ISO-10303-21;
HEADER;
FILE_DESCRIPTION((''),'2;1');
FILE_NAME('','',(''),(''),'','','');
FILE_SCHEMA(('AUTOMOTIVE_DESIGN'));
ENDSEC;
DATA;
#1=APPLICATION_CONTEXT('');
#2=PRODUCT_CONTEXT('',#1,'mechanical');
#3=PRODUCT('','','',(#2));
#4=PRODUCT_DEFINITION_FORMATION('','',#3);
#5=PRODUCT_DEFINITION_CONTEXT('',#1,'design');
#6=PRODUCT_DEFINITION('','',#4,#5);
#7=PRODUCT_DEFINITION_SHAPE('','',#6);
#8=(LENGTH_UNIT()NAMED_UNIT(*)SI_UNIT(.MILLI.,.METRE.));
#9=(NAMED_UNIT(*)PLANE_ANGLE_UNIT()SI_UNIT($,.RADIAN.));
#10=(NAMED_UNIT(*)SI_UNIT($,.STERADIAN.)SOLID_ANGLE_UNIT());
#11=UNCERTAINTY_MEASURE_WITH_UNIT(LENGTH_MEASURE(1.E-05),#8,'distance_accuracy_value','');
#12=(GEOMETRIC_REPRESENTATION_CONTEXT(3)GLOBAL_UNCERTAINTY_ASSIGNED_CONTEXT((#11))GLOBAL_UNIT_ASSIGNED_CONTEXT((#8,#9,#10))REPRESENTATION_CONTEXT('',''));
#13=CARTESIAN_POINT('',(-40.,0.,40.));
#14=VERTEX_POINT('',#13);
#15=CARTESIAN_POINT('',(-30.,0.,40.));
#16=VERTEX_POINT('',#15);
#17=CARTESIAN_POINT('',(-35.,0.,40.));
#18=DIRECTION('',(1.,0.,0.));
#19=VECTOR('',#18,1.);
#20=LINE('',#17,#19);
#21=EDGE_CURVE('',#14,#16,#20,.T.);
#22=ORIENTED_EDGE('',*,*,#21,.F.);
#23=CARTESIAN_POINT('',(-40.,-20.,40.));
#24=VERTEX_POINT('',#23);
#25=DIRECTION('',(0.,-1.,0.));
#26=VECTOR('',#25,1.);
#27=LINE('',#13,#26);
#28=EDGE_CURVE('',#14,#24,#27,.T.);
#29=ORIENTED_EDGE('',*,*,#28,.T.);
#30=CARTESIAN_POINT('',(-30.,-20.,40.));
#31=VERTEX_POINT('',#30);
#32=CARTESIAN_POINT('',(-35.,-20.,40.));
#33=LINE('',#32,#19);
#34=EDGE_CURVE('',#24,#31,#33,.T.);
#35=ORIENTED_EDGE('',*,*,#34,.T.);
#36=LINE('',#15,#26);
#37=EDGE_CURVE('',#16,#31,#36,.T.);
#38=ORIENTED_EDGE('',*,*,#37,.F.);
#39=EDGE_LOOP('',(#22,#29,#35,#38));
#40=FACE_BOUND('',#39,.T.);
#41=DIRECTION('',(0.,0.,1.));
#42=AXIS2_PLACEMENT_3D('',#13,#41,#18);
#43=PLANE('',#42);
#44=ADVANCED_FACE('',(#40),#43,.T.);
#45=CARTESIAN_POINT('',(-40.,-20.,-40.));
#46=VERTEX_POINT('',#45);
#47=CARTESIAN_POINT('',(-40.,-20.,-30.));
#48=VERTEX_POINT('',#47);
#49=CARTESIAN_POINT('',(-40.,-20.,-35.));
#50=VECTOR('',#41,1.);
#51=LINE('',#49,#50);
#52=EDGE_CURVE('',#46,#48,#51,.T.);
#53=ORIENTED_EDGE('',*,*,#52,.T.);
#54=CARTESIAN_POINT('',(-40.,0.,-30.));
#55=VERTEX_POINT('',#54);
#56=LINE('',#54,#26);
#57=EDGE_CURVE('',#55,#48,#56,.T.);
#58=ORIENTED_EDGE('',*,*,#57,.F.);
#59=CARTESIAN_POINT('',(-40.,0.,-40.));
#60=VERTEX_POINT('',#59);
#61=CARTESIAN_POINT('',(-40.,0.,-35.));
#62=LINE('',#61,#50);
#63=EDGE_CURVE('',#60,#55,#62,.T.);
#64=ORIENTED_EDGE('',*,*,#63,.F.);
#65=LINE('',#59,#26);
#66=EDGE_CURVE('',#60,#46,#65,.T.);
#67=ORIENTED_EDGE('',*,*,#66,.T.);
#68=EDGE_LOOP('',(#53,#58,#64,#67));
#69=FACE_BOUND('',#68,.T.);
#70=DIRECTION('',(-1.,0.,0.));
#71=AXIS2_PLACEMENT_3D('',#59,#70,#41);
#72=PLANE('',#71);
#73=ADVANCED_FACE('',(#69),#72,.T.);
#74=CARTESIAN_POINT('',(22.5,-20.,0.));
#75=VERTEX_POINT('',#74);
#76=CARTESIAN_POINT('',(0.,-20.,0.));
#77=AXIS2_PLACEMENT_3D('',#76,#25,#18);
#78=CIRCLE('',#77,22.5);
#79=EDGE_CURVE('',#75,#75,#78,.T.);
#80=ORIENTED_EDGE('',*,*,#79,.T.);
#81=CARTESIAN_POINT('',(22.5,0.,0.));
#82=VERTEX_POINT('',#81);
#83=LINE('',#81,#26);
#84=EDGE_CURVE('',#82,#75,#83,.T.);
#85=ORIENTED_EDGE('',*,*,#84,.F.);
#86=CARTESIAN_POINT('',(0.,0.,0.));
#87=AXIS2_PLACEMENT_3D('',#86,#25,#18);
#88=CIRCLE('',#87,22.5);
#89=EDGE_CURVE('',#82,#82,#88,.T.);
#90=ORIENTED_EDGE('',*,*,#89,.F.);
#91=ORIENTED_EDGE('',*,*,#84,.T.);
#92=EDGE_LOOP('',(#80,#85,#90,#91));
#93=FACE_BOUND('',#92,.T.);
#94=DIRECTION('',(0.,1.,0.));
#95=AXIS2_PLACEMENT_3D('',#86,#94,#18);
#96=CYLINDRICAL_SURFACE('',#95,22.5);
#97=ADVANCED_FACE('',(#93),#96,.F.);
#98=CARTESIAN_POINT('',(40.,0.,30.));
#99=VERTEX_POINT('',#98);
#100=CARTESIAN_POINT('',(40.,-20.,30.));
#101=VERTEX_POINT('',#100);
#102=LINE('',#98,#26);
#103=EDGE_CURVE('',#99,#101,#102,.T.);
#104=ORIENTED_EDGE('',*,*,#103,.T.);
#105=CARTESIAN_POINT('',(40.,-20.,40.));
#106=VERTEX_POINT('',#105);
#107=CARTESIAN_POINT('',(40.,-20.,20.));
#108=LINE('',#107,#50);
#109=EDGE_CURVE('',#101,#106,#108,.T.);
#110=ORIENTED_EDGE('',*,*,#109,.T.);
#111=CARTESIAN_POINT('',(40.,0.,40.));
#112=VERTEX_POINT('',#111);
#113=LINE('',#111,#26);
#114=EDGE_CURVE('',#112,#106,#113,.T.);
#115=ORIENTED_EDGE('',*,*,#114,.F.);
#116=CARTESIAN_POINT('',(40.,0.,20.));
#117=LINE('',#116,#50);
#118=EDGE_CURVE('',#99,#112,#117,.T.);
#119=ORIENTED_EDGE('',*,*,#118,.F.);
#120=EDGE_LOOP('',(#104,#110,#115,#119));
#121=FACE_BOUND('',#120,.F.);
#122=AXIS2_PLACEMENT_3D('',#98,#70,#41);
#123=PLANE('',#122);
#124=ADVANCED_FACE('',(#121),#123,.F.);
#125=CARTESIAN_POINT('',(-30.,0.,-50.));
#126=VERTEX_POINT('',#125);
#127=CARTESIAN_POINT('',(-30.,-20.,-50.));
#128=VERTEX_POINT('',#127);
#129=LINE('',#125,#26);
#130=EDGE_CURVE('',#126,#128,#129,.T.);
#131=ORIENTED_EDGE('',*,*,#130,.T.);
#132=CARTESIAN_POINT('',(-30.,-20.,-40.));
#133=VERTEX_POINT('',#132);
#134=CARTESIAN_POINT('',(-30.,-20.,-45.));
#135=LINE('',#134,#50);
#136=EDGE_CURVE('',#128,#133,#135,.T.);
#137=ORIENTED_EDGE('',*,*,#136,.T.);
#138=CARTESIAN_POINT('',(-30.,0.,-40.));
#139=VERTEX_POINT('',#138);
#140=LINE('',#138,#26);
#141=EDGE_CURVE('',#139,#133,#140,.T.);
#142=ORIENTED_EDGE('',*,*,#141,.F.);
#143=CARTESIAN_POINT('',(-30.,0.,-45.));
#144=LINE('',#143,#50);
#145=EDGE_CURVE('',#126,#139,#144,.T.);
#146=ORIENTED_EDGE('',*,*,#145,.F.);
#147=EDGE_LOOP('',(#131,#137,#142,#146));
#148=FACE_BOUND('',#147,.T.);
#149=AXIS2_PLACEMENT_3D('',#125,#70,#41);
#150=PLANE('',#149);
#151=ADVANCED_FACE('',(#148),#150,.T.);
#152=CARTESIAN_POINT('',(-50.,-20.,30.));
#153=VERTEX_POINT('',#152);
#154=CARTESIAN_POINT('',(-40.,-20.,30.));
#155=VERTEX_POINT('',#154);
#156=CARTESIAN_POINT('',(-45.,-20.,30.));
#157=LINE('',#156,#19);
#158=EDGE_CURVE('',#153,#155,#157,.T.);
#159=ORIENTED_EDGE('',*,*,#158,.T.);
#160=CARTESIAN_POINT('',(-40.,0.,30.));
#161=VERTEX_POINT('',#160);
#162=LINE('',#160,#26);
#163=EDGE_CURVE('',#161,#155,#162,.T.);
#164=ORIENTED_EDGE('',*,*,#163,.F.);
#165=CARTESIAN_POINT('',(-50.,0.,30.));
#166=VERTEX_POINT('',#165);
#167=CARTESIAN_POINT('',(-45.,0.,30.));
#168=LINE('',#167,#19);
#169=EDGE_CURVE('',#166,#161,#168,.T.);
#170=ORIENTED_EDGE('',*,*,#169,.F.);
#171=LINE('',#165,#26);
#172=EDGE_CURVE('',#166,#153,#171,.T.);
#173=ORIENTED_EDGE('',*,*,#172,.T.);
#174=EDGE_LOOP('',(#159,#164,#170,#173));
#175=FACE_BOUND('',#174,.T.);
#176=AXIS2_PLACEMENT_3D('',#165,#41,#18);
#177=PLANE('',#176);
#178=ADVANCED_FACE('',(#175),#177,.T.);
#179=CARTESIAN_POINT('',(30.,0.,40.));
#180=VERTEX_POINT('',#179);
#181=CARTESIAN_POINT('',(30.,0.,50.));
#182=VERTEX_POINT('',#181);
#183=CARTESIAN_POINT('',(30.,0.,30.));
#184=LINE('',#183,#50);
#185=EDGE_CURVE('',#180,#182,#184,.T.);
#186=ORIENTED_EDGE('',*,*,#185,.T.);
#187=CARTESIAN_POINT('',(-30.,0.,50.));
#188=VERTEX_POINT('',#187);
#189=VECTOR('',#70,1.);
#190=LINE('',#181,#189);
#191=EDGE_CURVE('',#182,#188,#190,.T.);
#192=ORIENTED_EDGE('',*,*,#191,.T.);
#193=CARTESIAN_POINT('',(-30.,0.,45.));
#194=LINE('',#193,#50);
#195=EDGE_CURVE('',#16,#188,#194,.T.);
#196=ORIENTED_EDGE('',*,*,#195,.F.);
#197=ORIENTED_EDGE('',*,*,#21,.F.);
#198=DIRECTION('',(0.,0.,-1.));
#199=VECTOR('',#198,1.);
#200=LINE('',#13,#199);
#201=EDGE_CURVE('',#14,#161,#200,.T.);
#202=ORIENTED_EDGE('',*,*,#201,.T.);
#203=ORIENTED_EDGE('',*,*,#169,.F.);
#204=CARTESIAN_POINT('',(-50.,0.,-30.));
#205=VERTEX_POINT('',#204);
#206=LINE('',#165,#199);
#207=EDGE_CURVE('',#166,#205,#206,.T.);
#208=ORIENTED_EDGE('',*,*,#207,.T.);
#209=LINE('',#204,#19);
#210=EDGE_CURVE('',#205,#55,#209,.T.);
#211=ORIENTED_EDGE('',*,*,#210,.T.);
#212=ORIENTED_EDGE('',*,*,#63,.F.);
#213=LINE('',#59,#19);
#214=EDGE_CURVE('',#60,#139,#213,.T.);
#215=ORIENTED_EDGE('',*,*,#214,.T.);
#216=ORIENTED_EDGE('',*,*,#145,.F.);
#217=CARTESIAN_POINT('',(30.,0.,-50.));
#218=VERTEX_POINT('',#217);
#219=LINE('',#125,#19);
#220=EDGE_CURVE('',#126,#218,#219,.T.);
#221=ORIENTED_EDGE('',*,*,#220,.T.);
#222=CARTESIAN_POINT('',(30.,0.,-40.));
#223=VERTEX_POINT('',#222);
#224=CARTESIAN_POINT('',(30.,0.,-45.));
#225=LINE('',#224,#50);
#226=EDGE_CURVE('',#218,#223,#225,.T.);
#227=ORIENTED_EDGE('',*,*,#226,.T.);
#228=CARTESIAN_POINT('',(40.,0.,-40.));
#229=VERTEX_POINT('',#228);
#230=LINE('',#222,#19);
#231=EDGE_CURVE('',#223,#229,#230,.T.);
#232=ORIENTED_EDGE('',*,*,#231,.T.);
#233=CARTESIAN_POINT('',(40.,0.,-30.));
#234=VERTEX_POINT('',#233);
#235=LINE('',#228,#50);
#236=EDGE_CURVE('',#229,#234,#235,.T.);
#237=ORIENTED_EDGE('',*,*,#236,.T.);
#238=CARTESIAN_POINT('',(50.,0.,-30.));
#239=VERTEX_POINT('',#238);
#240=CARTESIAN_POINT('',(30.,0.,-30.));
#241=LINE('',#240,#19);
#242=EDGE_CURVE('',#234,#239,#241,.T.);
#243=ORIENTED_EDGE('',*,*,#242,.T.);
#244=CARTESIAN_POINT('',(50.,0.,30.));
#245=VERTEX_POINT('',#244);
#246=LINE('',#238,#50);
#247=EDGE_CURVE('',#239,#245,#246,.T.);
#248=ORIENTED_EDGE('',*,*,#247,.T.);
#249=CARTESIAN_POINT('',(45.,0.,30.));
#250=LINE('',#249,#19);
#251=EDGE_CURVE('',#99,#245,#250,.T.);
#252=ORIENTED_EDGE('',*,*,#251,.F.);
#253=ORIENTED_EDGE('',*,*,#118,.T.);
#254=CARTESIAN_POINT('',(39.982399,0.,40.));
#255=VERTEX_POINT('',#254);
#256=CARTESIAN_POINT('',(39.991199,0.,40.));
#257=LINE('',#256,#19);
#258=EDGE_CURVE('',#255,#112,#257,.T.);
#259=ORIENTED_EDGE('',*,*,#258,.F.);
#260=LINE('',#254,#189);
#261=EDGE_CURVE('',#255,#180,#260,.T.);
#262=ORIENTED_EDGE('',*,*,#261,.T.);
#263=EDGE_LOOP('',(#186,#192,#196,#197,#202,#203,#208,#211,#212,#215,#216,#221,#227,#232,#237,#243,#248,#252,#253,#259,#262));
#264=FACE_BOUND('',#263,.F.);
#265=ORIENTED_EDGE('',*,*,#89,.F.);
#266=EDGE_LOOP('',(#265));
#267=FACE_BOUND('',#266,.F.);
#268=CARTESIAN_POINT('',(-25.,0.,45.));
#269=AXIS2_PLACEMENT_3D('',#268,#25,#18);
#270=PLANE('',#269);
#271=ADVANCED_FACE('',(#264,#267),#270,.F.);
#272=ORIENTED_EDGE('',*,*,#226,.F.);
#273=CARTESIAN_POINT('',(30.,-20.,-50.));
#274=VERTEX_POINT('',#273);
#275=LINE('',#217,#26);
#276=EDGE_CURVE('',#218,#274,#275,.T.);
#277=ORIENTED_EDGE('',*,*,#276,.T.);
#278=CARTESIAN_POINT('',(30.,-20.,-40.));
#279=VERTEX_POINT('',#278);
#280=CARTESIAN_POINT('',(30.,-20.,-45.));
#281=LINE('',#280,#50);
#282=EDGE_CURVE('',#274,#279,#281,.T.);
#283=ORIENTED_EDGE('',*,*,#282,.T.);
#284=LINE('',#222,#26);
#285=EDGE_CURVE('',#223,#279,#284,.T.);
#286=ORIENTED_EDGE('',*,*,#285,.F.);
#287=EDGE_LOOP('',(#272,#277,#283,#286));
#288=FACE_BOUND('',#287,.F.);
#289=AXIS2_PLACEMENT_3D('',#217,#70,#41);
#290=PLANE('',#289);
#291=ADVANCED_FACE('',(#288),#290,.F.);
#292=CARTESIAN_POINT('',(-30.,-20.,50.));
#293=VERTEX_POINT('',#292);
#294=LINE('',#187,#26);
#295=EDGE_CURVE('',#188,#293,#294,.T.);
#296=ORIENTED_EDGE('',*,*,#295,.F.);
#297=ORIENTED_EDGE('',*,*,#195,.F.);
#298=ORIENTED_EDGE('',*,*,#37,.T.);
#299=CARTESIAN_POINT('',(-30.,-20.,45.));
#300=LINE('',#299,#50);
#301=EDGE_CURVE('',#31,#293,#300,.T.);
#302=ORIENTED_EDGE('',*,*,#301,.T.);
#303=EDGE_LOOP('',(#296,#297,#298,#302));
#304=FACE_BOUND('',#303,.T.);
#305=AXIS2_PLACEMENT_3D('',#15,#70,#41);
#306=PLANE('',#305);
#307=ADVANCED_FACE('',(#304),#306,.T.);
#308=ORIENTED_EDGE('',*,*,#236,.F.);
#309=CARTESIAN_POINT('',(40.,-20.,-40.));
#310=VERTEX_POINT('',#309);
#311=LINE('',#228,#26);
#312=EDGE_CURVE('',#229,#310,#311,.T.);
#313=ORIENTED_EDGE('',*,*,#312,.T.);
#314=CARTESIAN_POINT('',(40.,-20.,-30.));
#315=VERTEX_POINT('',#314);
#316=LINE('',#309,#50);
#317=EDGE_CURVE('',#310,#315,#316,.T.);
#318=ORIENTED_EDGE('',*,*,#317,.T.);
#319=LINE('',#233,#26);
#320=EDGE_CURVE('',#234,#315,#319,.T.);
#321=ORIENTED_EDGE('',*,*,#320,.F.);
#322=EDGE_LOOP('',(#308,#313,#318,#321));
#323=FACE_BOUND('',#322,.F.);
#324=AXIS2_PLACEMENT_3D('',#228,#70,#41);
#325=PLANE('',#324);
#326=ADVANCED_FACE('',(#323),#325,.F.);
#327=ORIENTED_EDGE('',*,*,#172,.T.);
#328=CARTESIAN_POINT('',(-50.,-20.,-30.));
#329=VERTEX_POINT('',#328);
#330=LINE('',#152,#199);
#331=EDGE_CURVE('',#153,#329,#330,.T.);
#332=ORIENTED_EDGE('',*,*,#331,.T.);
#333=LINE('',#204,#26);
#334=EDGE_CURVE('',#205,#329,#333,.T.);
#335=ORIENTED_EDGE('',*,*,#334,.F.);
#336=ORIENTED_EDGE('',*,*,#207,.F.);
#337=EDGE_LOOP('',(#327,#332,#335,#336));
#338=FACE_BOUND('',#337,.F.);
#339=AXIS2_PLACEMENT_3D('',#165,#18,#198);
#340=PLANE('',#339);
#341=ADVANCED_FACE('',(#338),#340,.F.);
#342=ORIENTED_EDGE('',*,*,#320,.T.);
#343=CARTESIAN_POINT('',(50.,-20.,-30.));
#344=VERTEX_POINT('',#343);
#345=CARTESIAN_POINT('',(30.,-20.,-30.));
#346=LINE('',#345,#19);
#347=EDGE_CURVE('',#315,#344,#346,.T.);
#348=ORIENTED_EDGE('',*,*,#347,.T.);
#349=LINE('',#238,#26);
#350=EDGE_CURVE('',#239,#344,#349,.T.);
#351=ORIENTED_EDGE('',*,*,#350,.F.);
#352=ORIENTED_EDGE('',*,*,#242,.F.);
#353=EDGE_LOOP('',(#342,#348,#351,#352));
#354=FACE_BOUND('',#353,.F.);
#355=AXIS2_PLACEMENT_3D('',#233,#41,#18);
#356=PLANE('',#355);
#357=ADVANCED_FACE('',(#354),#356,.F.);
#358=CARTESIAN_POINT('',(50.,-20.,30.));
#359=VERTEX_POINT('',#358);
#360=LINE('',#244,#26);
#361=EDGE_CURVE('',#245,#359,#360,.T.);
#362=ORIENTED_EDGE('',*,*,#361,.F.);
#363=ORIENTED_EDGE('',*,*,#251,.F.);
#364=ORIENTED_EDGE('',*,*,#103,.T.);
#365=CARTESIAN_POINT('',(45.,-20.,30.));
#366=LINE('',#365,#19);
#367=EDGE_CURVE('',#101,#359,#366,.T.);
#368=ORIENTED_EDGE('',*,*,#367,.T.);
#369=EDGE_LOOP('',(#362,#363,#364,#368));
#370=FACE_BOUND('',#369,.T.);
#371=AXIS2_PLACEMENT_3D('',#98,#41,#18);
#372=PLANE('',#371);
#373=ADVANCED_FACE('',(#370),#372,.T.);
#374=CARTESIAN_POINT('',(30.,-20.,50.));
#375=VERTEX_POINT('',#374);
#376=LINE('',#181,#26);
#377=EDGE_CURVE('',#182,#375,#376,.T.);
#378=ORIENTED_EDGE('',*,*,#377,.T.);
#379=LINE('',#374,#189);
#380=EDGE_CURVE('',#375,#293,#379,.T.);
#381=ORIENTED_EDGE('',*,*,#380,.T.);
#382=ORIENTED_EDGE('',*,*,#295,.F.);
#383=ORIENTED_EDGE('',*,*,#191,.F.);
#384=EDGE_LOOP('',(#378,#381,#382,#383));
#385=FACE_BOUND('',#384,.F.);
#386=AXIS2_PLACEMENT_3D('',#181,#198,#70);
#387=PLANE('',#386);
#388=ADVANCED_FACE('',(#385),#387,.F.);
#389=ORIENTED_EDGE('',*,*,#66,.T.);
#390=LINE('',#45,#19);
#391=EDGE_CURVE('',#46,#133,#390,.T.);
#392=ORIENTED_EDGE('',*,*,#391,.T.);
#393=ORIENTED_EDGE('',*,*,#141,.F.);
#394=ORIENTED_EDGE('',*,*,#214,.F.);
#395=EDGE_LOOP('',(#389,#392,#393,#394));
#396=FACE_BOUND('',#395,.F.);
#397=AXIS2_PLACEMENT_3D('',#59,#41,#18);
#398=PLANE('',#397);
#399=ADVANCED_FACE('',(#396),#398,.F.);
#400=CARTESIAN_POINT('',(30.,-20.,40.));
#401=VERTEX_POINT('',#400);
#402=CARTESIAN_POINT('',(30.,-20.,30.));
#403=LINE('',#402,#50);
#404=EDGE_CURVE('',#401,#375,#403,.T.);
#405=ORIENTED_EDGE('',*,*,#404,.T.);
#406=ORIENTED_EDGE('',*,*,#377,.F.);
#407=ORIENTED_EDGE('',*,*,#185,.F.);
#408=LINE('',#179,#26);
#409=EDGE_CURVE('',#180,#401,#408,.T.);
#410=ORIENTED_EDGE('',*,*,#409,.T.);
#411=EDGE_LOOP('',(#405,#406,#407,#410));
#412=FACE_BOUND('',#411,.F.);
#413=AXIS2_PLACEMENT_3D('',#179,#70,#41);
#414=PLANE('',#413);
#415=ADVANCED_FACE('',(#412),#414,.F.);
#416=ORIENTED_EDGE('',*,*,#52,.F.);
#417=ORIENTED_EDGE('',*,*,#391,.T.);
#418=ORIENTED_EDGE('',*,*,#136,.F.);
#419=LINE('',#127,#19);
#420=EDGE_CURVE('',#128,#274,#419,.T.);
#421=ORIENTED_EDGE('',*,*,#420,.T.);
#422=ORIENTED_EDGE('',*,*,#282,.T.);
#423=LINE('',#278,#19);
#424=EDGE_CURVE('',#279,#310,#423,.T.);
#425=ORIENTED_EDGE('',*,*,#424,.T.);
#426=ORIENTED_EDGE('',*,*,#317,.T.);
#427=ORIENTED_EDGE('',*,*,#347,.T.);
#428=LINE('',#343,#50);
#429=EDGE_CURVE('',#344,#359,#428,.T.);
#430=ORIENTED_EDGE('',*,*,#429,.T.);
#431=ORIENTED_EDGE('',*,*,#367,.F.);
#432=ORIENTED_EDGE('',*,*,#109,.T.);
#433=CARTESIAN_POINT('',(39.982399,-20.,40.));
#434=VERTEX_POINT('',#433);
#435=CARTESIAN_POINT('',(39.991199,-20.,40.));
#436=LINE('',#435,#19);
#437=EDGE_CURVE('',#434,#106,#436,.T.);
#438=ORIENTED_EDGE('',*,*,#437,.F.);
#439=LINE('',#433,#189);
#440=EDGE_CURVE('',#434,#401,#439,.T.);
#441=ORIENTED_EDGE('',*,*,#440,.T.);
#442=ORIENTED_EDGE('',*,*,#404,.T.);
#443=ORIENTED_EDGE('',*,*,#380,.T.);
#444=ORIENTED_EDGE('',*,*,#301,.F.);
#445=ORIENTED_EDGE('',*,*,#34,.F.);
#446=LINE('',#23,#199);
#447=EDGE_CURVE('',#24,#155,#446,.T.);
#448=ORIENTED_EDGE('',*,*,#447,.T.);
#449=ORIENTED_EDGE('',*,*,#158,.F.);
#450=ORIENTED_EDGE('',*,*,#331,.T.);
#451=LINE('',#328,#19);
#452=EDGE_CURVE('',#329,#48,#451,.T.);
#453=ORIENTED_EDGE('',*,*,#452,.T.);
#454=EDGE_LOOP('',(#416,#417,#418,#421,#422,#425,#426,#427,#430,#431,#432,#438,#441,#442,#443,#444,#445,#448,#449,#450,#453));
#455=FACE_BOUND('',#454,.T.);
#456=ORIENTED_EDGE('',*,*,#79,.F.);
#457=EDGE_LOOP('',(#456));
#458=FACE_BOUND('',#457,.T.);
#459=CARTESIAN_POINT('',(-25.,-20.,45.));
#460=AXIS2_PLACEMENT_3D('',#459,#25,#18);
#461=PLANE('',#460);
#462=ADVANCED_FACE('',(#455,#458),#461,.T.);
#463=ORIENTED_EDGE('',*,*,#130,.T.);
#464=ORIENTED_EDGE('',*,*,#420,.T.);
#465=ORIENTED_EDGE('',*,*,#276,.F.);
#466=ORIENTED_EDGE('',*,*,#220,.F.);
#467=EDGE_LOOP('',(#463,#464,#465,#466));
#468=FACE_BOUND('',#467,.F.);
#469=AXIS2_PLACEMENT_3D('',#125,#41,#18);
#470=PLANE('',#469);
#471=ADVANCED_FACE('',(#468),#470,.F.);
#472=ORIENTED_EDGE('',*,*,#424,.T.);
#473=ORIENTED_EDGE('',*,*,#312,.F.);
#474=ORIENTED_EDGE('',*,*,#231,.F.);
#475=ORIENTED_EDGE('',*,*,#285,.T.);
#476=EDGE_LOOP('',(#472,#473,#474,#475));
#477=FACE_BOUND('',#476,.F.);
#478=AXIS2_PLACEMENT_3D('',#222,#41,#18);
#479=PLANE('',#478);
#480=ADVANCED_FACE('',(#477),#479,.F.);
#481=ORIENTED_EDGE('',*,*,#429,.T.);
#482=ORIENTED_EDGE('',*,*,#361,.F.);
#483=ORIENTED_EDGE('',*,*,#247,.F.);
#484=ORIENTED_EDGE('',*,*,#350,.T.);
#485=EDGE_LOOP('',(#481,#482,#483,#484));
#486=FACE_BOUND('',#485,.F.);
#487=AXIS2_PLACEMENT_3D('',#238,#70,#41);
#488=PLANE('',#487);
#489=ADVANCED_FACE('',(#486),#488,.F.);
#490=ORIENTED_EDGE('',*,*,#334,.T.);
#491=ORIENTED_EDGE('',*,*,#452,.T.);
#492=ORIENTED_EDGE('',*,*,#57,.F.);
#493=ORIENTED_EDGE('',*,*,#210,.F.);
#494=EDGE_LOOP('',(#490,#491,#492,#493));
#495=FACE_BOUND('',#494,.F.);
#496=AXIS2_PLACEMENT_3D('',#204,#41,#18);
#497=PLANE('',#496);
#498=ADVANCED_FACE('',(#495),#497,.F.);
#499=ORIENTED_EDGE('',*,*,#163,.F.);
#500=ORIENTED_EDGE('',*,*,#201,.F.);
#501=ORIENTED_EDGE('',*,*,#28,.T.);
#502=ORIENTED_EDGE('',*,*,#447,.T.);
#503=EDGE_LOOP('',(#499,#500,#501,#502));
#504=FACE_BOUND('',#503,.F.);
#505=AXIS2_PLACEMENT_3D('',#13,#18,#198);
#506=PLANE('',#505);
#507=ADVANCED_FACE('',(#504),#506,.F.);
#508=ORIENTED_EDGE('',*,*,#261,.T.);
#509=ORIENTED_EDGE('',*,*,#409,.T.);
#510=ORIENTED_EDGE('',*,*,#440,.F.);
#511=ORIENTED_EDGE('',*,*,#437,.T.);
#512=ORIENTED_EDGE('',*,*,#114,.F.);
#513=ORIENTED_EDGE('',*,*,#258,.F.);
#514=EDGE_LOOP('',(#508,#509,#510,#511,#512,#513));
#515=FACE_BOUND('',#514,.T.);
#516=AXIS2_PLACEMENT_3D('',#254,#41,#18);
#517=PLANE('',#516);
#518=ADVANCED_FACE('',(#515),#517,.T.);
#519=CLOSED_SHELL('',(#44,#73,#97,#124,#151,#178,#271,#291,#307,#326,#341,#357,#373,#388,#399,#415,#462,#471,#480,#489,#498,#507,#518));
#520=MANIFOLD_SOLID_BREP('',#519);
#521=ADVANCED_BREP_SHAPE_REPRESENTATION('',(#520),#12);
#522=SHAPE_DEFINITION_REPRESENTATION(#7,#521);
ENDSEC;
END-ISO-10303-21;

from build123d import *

# Parameters (mm, degrees)
F0_W     = 10
F0_H     = 10
F0_R     = 22.5
F0_W_2   = 0.0176012516
F0_H_2   = 0.0236101449
F0_W_3   = 0.002938509
F0_H_3   = 0.0060267746
F1_DEPTH = 20


with BuildPart() as f1:
    # F0 (on Front) → F1 (new body)
    with BuildSketch(Plane.XZ):
        with Locations((-25, 45)):
            Rectangle(F0_W, F0_H)
        with Locations((-35, 35)):
            Rectangle(F0_W, F0_H)
        Polygon((20, 50), (-20, 50), (-20, 40), (-30, 40), (-30, 30), (-40, 30), (-40, 20), (-50, 20), (-50, -20), (-40, -20), (-40, -30), (-30, -30), (-30, -40), (-20, -40), (-20, -50), (20, -50), (20, -40), (30, -40), (30, -30), (40, -30), (40, -20), (50, -20), (50, 20), (40, 20), (40, 30), (30, 30), (30, 40), (20, 40), align=None)
        Circle(F0_R, mode=Mode.SUBTRACT)
        with Locations((-45, 25)):
            Rectangle(F0_W, F0_H)
        with Locations((25, 45)):
            Rectangle(F0_W, F0_H)
        Polygon((39.9823987484, 40), (30, 40), (30, 30), (40, 30), (40, 39.9763898551), (39.9823987484, 39.9763898551), align=None)
        with Locations((-45, -25)):
            Rectangle(F0_W, F0_H)
        with Locations((39.9911993742, 39.9881949276)):
            Rectangle(F0_W_2, F0_H_2)
        with Locations((45, 25)):
            Rectangle(F0_W, F0_H)
        with Locations((-35, -35)):
            Rectangle(F0_W, F0_H)
        with Locations((-25, -45)):
            Rectangle(F0_W, F0_H)
        with Locations((45, -25)):
            Rectangle(F0_W, F0_H)
        Polygon((40, -39.9939732254), (40, -30), (30, -30), (30, -40), (39.9823987484, -40), (39.997061491, -40), (39.997061491, -39.9939732254), align=None)
        with Locations((25, -45)):
            Rectangle(F0_W, F0_H)
        with Locations((39.9985307455, -39.9969866127)):
            Rectangle(F0_W_3, F0_H_3)
    extrude(amount=F1_DEPTH)


solid = f1.part
